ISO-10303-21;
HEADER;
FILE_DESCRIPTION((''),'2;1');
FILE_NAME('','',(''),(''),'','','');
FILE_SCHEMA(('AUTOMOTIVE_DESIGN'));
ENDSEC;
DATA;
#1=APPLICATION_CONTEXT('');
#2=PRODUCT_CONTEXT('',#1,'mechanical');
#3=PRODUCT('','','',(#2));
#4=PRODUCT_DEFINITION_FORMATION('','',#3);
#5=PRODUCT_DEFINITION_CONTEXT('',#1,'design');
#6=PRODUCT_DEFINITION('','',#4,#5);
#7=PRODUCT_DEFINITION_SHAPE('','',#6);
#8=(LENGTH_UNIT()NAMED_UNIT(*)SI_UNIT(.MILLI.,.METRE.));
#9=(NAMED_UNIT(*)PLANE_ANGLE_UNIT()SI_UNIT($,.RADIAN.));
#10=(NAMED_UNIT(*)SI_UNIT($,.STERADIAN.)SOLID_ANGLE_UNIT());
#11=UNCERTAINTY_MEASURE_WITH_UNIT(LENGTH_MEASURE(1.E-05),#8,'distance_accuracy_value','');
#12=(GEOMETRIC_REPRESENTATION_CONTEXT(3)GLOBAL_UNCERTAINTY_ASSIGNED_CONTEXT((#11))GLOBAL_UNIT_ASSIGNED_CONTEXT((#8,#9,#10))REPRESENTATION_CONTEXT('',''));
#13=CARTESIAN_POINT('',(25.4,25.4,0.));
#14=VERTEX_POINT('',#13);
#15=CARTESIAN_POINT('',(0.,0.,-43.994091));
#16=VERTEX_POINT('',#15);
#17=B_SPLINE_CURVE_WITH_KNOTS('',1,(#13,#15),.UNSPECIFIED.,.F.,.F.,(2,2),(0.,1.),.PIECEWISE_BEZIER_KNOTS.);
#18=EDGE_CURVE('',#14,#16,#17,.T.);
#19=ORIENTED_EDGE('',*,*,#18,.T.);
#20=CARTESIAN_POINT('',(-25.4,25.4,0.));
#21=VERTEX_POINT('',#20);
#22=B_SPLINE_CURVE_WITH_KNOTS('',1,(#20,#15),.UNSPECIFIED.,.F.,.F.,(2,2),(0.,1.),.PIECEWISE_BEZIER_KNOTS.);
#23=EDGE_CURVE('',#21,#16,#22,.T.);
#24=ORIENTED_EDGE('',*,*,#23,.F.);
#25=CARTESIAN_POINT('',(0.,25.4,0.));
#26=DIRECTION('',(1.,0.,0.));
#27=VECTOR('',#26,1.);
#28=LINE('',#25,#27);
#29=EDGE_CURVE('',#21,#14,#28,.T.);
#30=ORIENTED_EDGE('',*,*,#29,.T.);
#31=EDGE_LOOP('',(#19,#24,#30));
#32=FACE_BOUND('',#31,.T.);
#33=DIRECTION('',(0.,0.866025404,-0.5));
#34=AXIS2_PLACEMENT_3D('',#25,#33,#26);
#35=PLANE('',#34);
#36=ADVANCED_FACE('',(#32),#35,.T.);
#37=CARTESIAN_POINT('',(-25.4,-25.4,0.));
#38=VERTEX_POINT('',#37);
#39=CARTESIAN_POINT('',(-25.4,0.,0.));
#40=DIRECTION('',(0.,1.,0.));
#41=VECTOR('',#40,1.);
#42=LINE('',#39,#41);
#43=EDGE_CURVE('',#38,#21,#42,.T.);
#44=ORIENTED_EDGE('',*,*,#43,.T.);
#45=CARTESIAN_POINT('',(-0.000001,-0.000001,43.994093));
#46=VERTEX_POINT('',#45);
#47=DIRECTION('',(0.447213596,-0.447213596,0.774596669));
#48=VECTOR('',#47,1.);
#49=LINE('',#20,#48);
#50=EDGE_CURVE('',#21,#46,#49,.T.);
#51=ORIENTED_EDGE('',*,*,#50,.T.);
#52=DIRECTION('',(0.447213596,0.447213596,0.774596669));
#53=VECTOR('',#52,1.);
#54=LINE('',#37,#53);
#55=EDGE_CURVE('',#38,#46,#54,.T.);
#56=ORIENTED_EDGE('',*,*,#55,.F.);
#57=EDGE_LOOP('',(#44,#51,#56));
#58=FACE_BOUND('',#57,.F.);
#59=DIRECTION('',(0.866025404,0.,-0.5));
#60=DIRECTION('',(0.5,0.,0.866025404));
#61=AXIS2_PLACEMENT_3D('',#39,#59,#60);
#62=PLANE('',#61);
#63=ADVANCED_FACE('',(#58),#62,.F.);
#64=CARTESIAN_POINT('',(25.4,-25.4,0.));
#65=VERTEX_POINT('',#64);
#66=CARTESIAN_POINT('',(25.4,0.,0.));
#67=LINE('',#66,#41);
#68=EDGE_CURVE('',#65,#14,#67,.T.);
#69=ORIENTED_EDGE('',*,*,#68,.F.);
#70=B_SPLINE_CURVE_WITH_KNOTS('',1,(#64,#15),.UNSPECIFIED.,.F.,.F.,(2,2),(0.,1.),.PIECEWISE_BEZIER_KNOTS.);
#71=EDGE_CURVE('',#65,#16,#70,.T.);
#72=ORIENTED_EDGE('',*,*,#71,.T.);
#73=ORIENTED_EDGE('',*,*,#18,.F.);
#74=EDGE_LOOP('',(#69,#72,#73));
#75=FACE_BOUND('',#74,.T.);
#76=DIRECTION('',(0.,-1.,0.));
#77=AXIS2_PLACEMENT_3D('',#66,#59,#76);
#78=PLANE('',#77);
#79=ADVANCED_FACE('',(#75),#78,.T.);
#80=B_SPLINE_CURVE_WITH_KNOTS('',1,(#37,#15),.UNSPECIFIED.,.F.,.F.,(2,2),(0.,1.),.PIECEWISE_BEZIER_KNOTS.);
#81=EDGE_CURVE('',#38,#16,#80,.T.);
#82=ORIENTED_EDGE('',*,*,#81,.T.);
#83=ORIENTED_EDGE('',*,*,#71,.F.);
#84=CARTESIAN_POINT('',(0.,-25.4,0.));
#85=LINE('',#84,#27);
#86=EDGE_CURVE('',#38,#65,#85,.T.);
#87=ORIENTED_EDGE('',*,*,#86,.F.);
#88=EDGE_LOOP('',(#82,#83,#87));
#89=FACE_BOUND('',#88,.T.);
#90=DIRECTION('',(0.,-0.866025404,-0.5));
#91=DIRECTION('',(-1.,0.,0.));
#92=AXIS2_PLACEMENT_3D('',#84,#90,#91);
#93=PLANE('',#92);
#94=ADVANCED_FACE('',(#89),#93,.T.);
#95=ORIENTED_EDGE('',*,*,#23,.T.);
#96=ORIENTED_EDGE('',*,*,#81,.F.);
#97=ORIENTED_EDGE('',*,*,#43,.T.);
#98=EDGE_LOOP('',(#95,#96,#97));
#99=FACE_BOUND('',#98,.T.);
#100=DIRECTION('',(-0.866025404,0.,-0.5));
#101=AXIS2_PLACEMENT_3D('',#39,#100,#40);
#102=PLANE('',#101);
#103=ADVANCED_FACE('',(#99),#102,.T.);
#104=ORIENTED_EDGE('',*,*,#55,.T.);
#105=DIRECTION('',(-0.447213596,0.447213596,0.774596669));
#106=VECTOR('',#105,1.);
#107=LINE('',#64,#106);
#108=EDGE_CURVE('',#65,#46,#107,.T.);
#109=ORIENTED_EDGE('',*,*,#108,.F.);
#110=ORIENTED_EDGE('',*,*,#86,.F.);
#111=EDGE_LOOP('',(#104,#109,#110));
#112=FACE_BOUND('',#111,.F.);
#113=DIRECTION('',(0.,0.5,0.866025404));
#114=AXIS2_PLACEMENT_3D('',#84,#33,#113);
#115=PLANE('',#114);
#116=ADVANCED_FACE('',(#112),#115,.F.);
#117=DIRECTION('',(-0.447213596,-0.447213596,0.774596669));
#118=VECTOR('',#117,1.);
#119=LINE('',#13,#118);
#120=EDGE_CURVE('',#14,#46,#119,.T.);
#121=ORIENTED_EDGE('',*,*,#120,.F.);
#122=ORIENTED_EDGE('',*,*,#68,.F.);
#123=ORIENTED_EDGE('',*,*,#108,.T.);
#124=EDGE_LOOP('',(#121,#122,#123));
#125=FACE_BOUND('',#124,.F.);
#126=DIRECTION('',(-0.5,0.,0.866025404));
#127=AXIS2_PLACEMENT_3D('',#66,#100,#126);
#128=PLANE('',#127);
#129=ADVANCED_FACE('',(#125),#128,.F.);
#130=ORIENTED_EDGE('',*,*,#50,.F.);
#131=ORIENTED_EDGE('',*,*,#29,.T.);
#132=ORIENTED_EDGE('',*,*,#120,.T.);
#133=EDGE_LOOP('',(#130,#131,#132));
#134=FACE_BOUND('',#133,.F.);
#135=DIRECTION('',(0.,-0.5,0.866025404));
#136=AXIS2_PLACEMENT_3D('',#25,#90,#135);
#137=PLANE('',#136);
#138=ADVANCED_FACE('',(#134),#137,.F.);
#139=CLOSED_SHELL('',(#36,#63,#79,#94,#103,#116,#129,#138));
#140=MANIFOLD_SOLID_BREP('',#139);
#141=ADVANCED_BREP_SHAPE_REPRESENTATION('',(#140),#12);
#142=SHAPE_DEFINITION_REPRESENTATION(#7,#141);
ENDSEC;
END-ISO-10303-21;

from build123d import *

# Parameters (mm, degrees)
F0_W      = 50.8
F0_H      = 50.8
F1_DEPTH  = 58.166
F1_TAPER  = 30
F1_FACE_W = 50.8
F1_FACE_H = 50.8


# Not quite as in the source:
# - an extrude whose draft closes it to a point is written as a loft to that point


with BuildPart() as f1:
    # F0 (on Top) → F1 (new body)
    with BuildSketch(Plane.XY):
        Rectangle(F0_W, F0_H)
    extrude(amount=F1_DEPTH, taper=F1_TAPER)

    # F1_face (on face) → F2 section 0
    with BuildSketch(Plane(origin=(0, 0, 0), x_dir=(1, 0, 0), z_dir=(0, 0, -1)), mode=Mode.PRIVATE) as f2_s0:
        Rectangle(F1_FACE_W, F1_FACE_H)
    loft([f2_s0.sketch, Vertex(0, 0, -43.9940905122)], ruled=True)


solid = f1.part
